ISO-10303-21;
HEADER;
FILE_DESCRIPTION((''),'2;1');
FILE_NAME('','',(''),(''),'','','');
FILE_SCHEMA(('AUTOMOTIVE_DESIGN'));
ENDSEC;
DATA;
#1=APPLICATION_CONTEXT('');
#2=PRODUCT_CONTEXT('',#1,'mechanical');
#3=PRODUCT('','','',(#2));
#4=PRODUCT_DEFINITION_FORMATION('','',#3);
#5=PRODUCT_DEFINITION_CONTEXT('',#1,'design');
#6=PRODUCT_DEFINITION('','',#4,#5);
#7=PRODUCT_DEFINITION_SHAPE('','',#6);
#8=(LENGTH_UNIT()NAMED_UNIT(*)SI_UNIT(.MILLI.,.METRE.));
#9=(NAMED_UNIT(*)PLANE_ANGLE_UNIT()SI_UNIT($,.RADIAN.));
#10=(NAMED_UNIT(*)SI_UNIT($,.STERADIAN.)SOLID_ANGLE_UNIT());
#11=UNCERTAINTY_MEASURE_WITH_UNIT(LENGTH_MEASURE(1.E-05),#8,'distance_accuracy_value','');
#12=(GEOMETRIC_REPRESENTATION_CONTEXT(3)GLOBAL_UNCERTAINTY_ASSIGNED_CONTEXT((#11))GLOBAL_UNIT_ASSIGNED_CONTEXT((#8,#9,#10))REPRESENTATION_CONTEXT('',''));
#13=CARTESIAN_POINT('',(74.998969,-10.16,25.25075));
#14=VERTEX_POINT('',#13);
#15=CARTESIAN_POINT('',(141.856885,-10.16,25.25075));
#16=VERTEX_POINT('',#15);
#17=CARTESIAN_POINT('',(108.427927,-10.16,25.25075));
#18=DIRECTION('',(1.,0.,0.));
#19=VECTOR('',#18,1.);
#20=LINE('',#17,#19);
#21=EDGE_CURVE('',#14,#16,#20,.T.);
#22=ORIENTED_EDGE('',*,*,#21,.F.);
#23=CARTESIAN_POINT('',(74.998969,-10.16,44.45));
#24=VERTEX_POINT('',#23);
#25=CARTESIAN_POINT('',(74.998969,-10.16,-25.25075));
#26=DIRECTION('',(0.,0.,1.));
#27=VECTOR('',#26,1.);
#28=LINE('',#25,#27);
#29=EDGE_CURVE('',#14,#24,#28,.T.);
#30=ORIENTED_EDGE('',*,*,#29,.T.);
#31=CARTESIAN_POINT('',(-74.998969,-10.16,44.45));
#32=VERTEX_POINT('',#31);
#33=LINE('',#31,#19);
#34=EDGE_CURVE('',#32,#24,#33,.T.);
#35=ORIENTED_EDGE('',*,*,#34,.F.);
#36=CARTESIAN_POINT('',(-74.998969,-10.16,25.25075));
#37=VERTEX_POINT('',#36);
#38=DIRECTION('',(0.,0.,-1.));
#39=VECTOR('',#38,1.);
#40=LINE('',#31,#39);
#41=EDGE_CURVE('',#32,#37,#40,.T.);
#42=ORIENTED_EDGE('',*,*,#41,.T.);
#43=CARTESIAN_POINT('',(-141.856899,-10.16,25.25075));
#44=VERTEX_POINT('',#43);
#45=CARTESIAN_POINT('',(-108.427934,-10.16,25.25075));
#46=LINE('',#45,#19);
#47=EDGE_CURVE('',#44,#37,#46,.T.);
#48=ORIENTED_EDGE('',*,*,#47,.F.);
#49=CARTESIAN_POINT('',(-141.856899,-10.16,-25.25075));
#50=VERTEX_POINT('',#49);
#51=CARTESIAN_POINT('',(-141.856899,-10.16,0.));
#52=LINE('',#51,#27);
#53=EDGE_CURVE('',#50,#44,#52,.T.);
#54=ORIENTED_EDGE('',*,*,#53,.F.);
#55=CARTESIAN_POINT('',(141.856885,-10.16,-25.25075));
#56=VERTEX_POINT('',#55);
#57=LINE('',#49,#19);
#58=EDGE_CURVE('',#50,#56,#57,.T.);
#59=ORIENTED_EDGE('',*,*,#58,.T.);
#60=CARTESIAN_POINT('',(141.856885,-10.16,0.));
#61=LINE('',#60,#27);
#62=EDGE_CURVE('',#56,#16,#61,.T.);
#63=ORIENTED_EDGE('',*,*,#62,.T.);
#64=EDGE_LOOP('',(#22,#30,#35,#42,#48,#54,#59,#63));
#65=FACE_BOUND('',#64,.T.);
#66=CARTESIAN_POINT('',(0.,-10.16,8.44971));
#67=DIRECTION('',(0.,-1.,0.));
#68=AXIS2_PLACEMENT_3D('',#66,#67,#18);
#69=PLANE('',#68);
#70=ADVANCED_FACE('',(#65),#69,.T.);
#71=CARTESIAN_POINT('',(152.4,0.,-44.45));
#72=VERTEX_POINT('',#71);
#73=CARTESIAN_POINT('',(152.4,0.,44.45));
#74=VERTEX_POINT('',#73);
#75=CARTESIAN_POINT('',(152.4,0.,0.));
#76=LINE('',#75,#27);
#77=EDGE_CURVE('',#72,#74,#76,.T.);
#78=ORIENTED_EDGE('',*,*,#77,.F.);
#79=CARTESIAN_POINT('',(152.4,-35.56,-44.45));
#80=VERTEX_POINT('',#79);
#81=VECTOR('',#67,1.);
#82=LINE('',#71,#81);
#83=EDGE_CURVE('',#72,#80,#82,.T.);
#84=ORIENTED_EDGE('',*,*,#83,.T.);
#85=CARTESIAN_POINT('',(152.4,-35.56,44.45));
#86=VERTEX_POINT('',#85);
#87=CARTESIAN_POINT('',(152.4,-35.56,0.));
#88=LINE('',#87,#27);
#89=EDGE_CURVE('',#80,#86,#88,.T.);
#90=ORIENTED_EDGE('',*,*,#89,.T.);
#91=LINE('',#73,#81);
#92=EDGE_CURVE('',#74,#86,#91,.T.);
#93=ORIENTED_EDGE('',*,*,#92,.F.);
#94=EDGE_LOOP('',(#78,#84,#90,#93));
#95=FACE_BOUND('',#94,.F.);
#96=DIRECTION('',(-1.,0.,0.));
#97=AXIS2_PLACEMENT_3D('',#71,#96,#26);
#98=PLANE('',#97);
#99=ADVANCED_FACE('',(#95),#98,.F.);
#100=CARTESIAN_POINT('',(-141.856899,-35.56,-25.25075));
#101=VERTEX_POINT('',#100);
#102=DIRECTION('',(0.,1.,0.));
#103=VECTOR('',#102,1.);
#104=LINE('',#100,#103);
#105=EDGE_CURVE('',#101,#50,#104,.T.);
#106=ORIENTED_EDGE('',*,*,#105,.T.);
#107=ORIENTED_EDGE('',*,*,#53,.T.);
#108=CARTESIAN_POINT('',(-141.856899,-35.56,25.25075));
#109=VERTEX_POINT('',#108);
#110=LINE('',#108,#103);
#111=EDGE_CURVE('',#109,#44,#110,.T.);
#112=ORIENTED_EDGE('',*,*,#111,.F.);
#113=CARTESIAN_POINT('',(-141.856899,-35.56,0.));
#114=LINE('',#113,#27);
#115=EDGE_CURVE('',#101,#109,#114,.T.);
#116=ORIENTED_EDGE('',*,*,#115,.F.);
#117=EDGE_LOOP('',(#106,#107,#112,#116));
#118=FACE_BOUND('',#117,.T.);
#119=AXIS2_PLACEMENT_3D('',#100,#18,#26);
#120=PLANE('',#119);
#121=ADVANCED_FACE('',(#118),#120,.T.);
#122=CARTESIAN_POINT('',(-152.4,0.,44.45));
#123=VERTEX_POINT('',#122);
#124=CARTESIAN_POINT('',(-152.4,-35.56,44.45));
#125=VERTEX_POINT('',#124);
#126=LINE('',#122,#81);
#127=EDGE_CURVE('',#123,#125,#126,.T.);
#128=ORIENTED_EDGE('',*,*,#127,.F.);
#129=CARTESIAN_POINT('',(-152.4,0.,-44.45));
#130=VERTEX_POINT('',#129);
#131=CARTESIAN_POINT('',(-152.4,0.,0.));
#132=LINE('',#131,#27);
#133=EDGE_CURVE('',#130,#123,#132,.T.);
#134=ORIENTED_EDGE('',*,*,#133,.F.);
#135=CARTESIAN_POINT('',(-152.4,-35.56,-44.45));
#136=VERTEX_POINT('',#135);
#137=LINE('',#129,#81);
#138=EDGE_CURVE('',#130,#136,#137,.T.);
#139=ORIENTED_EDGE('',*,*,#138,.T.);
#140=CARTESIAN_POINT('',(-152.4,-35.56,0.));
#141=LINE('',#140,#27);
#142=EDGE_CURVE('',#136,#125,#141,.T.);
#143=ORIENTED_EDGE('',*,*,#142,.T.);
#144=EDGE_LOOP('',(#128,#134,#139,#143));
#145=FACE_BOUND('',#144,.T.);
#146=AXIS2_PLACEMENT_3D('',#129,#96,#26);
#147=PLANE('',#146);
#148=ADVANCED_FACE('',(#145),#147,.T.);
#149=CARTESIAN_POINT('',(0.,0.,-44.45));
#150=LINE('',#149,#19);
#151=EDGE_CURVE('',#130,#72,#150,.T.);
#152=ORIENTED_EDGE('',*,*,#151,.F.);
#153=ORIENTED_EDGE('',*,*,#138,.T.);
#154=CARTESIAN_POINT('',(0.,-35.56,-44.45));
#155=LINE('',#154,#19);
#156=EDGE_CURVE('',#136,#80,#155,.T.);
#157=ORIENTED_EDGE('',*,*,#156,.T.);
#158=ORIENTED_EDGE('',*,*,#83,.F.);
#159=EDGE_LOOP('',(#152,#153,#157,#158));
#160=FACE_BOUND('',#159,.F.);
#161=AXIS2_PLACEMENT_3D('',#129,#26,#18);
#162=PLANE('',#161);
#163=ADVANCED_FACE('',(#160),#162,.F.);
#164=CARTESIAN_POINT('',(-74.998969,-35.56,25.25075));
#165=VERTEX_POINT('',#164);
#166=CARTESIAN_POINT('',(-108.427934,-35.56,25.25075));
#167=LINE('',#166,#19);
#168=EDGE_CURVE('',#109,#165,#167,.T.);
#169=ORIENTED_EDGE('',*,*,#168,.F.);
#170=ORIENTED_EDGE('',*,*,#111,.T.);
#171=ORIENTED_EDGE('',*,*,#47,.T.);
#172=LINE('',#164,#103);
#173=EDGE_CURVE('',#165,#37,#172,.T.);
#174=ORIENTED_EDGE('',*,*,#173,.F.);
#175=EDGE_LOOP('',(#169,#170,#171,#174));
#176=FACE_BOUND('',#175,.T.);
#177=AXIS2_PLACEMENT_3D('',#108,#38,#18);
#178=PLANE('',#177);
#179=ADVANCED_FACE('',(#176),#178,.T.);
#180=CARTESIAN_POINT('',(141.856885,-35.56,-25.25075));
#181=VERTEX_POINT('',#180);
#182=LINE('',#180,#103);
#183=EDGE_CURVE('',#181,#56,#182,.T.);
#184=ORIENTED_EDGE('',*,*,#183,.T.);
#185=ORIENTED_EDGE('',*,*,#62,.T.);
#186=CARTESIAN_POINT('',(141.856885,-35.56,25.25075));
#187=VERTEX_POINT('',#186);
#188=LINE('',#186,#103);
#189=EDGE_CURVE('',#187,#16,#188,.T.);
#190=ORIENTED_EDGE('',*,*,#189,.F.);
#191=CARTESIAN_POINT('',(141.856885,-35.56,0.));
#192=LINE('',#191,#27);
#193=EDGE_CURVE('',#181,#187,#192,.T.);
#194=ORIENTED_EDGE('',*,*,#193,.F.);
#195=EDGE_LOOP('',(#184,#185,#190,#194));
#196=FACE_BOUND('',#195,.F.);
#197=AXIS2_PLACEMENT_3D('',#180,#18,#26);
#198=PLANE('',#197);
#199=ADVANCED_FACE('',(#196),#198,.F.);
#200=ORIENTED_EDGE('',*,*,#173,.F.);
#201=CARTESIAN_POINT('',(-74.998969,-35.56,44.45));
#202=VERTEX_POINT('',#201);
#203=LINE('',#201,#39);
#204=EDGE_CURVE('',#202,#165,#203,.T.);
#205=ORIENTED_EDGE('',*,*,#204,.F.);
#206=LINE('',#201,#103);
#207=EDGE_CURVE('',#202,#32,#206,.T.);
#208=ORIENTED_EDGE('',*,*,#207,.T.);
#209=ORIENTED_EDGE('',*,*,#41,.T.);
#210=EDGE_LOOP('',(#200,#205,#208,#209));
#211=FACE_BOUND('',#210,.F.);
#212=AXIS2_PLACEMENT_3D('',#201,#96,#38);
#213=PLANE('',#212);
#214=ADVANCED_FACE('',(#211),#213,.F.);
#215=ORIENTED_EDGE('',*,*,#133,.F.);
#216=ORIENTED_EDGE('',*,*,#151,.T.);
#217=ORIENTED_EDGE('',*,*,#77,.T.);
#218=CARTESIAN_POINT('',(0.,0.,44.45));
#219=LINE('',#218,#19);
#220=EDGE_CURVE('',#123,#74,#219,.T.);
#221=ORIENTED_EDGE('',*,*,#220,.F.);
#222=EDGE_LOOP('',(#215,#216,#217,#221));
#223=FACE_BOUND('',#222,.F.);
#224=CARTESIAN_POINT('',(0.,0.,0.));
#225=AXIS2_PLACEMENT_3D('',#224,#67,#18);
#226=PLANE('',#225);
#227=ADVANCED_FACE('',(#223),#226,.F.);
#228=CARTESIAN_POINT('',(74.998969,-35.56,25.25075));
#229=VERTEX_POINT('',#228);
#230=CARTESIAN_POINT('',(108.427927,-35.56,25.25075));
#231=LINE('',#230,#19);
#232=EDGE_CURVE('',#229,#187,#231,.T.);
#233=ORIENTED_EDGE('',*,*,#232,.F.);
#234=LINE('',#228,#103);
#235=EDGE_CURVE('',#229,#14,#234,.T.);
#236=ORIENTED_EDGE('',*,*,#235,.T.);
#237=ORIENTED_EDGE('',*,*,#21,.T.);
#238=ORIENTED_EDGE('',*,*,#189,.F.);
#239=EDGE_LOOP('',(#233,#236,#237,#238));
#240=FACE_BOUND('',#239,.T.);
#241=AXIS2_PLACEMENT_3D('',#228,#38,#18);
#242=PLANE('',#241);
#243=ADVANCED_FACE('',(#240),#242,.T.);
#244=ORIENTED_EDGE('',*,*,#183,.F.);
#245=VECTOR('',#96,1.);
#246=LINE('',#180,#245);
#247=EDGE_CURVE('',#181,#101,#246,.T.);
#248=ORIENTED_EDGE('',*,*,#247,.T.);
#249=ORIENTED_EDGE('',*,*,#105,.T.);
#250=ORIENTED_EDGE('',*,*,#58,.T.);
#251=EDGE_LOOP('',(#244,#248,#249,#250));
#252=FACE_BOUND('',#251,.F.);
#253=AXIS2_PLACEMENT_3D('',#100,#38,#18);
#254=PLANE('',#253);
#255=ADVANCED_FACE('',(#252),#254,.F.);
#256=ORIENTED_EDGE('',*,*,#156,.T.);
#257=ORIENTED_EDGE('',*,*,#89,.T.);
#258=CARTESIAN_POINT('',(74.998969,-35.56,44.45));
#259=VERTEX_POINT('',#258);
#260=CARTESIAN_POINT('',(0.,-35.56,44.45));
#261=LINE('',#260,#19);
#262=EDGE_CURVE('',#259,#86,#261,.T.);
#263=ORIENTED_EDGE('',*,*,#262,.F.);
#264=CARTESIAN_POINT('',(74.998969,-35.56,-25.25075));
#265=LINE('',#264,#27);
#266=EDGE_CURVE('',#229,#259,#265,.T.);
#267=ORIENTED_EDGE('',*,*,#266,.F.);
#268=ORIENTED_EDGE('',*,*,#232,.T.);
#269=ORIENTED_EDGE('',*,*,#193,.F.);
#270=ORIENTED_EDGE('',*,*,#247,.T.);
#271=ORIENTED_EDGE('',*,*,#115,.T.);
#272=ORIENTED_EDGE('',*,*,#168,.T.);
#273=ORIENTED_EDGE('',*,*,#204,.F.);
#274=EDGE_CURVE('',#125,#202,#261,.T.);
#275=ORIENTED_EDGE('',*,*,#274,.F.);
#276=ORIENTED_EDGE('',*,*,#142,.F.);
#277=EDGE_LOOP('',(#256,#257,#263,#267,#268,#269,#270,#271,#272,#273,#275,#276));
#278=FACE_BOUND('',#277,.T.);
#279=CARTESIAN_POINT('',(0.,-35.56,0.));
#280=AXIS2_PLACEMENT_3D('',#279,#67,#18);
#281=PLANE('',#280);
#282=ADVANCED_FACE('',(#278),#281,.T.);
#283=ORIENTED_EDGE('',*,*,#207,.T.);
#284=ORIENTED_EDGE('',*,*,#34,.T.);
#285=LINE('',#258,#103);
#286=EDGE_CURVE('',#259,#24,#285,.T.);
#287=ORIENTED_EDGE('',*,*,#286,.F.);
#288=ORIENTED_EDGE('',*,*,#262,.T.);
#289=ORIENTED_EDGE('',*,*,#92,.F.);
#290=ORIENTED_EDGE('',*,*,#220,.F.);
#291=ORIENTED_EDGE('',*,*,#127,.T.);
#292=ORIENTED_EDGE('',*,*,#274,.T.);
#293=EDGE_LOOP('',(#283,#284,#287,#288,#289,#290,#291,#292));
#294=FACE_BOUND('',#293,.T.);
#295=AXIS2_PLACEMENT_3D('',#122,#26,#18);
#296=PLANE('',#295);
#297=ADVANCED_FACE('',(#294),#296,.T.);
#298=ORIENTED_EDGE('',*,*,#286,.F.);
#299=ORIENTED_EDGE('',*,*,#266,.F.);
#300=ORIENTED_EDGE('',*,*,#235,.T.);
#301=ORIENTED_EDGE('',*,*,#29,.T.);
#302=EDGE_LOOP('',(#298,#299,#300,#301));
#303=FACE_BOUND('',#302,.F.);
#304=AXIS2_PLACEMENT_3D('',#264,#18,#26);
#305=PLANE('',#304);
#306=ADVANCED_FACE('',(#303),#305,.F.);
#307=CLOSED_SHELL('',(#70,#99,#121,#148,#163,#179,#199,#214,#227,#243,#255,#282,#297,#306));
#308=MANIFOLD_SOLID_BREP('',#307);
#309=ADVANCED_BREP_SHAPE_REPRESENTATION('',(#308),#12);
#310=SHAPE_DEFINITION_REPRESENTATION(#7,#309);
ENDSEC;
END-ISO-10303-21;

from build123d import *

# Parameters (mm, degrees)
F0_W     = 304.8
F0_H     = 88.9
F1_DEPTH = 35.56
F3_DEPTH = 25.4
F4_DEPTH = 25.4
F2_W     = 66.8579302463
F2_H     = 50.5015006546
F2_W_2   = 66.8579153451
F5_DEPTH = 25.4


# Not quite as in the source:
# - a feature names something its author has since deleted; it is built from what else it names


with BuildPart() as f1:
    # F0 (on Front) → F1 (new body)
    with BuildSketch(Plane.XZ):
        Rectangle(F0_W, F0_H)
    extrude(amount=F1_DEPTH)

    # F2 (on face) → F3 (cut)
    with BuildSketch(Plane.XZ.offset(35.56)):
        Polygon((-33.3375, 19.1518365622), (-33.3375, 44.45), (-74.9989692254, 44.45), (-74.9989692254, 25.2507503273), (-74.9989692254, -25.2507503273), (74.9989692254, -25.2507503273), (74.9989692254, 25.2507503273), (74.9989692254, 44.45), (33.3375, 44.45), (33.3375, 19.1518365622), align=None)
    extrude(amount=-F3_DEPTH, mode=Mode.SUBTRACT)

    # F4 (cut): a face of the model
    f4_faces = [f1.faces().sort_by_distance(p)[0] for p in [
        (0, -35.56, 31.8009182811),
    ]]
    extrude(f4_faces, amount=-F4_DEPTH, mode=Mode.SUBTRACT)

    # F2 (on face) → F5 (cut)
    with BuildSketch(Plane.XZ.offset(35.56)):
        with Locations((-108.4279343486, 0)):
            Rectangle(F2_W, F2_H)
        with Locations((108.427926898, 0)):
            Rectangle(F2_W_2, F2_H)
    extrude(amount=-F5_DEPTH, mode=Mode.SUBTRACT)


solid = f1.part
